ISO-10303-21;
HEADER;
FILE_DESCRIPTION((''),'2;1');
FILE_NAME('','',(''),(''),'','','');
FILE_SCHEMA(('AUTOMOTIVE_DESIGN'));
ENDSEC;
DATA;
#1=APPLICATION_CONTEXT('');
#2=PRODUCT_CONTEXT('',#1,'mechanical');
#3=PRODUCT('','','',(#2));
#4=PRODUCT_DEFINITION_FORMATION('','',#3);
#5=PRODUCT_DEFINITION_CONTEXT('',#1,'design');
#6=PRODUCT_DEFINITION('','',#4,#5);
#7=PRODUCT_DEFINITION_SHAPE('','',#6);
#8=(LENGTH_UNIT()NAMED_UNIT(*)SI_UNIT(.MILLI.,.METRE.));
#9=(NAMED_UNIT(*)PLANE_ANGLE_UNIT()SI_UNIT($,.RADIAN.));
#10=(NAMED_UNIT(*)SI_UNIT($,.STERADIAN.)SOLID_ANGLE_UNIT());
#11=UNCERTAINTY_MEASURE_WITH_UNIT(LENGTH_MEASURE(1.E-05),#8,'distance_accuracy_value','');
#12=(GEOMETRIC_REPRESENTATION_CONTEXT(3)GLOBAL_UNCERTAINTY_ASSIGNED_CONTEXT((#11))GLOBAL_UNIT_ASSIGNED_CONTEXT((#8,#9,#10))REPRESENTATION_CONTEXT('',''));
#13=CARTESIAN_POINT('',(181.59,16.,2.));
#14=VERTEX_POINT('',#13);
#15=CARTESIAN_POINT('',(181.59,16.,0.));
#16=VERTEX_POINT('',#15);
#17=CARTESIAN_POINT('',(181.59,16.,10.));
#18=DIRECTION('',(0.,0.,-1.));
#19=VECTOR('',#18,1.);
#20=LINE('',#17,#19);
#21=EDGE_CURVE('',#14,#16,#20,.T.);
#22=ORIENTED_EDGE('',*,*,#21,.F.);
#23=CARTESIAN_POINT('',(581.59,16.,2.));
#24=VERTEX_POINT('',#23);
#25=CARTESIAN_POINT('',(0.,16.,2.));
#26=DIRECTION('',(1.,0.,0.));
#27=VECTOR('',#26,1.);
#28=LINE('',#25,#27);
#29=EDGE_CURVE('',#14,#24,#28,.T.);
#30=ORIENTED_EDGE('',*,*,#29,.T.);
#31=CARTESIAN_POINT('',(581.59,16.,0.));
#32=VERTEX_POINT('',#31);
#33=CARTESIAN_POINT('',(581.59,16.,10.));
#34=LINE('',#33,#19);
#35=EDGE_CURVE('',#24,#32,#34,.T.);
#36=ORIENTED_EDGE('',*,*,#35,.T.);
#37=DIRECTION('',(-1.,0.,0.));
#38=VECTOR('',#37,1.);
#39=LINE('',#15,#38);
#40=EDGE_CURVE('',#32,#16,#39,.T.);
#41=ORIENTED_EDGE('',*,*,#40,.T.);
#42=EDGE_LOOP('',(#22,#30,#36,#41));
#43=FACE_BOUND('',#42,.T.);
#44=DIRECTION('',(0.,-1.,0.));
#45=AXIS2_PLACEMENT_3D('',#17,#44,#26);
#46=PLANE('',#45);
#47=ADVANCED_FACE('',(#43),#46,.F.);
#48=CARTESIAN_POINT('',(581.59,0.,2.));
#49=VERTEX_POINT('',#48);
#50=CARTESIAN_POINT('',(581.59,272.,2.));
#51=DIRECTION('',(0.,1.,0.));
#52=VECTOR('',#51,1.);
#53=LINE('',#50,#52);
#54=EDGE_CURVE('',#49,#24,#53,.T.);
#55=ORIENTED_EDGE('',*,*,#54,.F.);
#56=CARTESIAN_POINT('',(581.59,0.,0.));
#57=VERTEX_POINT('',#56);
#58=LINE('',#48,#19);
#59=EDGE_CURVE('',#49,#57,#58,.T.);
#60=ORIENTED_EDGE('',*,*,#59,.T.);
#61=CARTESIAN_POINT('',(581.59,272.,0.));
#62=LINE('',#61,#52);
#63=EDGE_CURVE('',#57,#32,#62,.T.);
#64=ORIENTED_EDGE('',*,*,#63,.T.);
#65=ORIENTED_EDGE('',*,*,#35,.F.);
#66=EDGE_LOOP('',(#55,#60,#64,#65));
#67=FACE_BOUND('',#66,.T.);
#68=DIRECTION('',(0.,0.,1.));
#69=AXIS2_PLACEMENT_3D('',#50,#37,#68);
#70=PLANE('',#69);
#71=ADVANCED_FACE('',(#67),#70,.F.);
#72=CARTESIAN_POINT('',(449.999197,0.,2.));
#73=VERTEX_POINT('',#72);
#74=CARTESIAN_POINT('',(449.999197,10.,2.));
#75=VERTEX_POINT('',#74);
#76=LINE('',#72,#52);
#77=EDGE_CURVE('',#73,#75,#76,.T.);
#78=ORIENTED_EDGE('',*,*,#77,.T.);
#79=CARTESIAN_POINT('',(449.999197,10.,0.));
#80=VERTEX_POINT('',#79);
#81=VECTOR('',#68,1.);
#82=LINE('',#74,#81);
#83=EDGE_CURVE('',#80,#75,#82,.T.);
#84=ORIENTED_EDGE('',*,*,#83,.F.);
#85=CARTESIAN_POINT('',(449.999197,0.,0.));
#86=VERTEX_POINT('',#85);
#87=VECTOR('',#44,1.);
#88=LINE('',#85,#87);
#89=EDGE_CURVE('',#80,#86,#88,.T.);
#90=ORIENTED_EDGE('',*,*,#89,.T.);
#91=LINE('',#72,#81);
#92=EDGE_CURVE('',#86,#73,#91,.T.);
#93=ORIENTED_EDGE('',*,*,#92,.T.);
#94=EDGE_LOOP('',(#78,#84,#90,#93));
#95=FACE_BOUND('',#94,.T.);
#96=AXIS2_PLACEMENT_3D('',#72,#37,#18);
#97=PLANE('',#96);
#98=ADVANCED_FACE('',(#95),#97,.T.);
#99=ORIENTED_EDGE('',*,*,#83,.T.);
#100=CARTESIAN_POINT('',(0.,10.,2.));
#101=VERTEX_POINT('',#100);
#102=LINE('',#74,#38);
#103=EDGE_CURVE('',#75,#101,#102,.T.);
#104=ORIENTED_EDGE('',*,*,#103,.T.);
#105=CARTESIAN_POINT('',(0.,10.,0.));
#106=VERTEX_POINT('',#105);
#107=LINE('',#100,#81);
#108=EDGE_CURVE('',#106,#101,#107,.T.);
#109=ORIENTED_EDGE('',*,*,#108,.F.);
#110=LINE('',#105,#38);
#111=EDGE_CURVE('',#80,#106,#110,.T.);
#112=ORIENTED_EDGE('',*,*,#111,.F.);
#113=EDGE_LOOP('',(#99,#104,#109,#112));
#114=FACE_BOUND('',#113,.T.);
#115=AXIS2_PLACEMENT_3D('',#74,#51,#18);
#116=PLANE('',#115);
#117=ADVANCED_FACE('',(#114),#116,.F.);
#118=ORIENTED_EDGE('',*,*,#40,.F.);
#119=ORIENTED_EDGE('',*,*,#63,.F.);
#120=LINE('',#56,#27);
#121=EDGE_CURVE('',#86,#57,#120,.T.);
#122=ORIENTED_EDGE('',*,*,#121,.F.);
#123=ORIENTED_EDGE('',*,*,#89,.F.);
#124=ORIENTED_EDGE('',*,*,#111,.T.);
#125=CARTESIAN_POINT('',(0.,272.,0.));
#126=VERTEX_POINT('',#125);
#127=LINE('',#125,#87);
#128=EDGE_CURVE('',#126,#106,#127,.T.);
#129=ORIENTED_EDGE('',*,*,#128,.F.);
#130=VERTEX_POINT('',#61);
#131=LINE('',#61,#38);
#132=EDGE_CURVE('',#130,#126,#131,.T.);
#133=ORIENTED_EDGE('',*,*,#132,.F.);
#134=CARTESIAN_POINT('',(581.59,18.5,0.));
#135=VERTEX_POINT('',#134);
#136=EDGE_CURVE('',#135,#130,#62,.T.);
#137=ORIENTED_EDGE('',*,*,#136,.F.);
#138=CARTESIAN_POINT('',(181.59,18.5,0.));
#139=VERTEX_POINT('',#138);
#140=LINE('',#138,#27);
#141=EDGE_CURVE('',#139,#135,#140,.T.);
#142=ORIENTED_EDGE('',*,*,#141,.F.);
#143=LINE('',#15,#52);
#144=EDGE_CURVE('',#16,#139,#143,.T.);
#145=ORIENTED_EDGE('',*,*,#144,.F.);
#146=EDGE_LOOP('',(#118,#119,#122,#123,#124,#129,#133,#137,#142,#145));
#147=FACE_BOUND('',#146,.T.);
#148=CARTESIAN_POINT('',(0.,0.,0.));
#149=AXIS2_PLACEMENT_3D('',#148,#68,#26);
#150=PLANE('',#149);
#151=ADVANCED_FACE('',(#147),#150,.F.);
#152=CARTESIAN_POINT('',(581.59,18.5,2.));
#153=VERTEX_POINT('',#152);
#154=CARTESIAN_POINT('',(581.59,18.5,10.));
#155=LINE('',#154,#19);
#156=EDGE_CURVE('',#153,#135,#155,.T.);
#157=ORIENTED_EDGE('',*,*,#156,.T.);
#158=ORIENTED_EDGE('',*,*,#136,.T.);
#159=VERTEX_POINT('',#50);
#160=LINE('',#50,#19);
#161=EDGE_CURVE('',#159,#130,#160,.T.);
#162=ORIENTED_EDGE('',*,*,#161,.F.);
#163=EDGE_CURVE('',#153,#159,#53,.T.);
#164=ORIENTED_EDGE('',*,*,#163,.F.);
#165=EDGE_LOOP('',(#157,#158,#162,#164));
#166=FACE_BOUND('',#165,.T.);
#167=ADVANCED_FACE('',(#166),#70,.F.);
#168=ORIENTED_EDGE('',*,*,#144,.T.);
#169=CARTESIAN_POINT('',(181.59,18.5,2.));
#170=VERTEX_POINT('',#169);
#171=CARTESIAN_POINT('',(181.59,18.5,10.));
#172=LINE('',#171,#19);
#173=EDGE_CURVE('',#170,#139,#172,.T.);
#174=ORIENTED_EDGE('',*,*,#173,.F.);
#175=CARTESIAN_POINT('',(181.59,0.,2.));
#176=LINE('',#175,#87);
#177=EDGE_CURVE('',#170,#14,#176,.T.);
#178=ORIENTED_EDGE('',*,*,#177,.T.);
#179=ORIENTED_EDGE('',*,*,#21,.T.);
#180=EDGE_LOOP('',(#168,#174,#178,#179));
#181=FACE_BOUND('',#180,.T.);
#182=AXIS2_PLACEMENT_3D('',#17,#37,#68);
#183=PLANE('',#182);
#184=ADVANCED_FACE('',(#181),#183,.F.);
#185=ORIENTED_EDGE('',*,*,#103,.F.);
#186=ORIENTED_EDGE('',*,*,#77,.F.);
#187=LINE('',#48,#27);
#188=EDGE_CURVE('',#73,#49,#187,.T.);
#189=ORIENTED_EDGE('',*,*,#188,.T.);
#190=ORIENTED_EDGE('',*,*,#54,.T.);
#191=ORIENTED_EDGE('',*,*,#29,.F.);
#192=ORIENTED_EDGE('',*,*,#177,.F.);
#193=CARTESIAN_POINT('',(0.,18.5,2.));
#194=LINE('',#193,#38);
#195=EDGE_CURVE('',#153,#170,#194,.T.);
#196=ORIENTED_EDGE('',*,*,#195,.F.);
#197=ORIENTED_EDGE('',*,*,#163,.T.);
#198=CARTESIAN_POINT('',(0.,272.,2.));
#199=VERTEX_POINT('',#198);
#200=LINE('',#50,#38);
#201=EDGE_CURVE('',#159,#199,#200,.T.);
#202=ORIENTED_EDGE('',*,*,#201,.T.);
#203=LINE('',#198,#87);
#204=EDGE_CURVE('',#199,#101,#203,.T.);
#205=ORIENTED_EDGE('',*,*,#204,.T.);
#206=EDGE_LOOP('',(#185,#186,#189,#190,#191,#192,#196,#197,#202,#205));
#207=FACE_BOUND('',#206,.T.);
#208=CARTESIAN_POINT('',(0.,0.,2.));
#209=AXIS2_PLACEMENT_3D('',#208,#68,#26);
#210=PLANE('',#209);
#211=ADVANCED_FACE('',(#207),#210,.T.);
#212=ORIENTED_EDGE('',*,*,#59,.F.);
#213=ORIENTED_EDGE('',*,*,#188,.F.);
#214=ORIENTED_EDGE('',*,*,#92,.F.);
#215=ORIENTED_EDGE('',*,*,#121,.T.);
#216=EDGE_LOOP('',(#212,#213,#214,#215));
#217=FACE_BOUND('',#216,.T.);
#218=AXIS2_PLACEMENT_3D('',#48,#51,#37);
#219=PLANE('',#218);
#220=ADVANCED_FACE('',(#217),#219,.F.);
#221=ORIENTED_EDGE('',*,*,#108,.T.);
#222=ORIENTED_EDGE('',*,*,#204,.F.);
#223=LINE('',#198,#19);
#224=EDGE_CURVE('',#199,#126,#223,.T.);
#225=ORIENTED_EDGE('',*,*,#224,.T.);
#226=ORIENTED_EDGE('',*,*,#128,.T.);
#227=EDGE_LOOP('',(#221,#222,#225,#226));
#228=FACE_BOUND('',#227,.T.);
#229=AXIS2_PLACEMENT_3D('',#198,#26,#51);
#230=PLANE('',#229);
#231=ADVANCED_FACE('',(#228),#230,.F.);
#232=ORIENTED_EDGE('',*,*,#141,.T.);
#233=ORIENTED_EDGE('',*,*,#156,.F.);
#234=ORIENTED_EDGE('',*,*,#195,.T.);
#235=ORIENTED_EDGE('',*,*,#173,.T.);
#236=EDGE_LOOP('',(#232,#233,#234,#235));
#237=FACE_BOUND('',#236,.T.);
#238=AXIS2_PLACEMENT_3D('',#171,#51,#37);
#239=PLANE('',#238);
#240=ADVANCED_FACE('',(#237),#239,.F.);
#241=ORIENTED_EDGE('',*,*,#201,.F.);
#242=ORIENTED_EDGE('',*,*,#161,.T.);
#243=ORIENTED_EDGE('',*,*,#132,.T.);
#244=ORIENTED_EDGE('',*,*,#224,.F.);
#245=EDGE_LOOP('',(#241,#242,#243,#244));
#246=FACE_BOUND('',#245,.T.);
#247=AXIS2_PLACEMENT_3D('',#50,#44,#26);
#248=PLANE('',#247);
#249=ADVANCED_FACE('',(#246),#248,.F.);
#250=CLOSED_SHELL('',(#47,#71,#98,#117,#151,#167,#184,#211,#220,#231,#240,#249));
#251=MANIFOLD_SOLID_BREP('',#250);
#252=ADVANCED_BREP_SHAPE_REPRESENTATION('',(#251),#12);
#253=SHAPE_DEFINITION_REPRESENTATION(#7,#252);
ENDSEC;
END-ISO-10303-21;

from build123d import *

# Parameters (mm, degrees)
SKETCH1_W           = 581.59
SKETCH1_H           = 272
BOSS_EXTRUDE1_DEPTH = 2
SKETCH2_W           = 400
SKETCH2_H           = 2.5
CUT_EXTRUDE1_DEPTH  = 10
CAVITY2_OUTLINE_W   = 10
CAVITY2_OUTLINE_H   = 2
CAVITY2_DEPTH       = 449.999196591


# Read off the part's stored shape, not the designer's step: Cavity2
with BuildPart() as part:
    # Sketch1 → Boss-Extrude1 (new body)
    with BuildSketch(Plane.XY):
        with Locations((290.795, 136)):
            Rectangle(SKETCH1_W, SKETCH1_H)
    extrude(amount=BOSS_EXTRUDE1_DEPTH)

    # Sketch2 → Cut-Extrude1 (cut)
    with BuildSketch(Plane(origin=(0, 0, 0), x_dir=(-1, 0, 0), z_dir=(0, 0, -1))):
        with Locations((-381.59, 17.25)):
            Rectangle(SKETCH2_W, SKETCH2_H)
    extrude(amount=-CUT_EXTRUDE1_DEPTH, mode=Mode.SUBTRACT)

    # Cavity2 outline → Cavity2 (cut)
    with BuildSketch(Plane.YZ):
        with Locations((5, 1)):
            Rectangle(CAVITY2_OUTLINE_W, CAVITY2_OUTLINE_H)
    extrude(amount=CAVITY2_DEPTH, mode=Mode.SUBTRACT)


solid = part.part
